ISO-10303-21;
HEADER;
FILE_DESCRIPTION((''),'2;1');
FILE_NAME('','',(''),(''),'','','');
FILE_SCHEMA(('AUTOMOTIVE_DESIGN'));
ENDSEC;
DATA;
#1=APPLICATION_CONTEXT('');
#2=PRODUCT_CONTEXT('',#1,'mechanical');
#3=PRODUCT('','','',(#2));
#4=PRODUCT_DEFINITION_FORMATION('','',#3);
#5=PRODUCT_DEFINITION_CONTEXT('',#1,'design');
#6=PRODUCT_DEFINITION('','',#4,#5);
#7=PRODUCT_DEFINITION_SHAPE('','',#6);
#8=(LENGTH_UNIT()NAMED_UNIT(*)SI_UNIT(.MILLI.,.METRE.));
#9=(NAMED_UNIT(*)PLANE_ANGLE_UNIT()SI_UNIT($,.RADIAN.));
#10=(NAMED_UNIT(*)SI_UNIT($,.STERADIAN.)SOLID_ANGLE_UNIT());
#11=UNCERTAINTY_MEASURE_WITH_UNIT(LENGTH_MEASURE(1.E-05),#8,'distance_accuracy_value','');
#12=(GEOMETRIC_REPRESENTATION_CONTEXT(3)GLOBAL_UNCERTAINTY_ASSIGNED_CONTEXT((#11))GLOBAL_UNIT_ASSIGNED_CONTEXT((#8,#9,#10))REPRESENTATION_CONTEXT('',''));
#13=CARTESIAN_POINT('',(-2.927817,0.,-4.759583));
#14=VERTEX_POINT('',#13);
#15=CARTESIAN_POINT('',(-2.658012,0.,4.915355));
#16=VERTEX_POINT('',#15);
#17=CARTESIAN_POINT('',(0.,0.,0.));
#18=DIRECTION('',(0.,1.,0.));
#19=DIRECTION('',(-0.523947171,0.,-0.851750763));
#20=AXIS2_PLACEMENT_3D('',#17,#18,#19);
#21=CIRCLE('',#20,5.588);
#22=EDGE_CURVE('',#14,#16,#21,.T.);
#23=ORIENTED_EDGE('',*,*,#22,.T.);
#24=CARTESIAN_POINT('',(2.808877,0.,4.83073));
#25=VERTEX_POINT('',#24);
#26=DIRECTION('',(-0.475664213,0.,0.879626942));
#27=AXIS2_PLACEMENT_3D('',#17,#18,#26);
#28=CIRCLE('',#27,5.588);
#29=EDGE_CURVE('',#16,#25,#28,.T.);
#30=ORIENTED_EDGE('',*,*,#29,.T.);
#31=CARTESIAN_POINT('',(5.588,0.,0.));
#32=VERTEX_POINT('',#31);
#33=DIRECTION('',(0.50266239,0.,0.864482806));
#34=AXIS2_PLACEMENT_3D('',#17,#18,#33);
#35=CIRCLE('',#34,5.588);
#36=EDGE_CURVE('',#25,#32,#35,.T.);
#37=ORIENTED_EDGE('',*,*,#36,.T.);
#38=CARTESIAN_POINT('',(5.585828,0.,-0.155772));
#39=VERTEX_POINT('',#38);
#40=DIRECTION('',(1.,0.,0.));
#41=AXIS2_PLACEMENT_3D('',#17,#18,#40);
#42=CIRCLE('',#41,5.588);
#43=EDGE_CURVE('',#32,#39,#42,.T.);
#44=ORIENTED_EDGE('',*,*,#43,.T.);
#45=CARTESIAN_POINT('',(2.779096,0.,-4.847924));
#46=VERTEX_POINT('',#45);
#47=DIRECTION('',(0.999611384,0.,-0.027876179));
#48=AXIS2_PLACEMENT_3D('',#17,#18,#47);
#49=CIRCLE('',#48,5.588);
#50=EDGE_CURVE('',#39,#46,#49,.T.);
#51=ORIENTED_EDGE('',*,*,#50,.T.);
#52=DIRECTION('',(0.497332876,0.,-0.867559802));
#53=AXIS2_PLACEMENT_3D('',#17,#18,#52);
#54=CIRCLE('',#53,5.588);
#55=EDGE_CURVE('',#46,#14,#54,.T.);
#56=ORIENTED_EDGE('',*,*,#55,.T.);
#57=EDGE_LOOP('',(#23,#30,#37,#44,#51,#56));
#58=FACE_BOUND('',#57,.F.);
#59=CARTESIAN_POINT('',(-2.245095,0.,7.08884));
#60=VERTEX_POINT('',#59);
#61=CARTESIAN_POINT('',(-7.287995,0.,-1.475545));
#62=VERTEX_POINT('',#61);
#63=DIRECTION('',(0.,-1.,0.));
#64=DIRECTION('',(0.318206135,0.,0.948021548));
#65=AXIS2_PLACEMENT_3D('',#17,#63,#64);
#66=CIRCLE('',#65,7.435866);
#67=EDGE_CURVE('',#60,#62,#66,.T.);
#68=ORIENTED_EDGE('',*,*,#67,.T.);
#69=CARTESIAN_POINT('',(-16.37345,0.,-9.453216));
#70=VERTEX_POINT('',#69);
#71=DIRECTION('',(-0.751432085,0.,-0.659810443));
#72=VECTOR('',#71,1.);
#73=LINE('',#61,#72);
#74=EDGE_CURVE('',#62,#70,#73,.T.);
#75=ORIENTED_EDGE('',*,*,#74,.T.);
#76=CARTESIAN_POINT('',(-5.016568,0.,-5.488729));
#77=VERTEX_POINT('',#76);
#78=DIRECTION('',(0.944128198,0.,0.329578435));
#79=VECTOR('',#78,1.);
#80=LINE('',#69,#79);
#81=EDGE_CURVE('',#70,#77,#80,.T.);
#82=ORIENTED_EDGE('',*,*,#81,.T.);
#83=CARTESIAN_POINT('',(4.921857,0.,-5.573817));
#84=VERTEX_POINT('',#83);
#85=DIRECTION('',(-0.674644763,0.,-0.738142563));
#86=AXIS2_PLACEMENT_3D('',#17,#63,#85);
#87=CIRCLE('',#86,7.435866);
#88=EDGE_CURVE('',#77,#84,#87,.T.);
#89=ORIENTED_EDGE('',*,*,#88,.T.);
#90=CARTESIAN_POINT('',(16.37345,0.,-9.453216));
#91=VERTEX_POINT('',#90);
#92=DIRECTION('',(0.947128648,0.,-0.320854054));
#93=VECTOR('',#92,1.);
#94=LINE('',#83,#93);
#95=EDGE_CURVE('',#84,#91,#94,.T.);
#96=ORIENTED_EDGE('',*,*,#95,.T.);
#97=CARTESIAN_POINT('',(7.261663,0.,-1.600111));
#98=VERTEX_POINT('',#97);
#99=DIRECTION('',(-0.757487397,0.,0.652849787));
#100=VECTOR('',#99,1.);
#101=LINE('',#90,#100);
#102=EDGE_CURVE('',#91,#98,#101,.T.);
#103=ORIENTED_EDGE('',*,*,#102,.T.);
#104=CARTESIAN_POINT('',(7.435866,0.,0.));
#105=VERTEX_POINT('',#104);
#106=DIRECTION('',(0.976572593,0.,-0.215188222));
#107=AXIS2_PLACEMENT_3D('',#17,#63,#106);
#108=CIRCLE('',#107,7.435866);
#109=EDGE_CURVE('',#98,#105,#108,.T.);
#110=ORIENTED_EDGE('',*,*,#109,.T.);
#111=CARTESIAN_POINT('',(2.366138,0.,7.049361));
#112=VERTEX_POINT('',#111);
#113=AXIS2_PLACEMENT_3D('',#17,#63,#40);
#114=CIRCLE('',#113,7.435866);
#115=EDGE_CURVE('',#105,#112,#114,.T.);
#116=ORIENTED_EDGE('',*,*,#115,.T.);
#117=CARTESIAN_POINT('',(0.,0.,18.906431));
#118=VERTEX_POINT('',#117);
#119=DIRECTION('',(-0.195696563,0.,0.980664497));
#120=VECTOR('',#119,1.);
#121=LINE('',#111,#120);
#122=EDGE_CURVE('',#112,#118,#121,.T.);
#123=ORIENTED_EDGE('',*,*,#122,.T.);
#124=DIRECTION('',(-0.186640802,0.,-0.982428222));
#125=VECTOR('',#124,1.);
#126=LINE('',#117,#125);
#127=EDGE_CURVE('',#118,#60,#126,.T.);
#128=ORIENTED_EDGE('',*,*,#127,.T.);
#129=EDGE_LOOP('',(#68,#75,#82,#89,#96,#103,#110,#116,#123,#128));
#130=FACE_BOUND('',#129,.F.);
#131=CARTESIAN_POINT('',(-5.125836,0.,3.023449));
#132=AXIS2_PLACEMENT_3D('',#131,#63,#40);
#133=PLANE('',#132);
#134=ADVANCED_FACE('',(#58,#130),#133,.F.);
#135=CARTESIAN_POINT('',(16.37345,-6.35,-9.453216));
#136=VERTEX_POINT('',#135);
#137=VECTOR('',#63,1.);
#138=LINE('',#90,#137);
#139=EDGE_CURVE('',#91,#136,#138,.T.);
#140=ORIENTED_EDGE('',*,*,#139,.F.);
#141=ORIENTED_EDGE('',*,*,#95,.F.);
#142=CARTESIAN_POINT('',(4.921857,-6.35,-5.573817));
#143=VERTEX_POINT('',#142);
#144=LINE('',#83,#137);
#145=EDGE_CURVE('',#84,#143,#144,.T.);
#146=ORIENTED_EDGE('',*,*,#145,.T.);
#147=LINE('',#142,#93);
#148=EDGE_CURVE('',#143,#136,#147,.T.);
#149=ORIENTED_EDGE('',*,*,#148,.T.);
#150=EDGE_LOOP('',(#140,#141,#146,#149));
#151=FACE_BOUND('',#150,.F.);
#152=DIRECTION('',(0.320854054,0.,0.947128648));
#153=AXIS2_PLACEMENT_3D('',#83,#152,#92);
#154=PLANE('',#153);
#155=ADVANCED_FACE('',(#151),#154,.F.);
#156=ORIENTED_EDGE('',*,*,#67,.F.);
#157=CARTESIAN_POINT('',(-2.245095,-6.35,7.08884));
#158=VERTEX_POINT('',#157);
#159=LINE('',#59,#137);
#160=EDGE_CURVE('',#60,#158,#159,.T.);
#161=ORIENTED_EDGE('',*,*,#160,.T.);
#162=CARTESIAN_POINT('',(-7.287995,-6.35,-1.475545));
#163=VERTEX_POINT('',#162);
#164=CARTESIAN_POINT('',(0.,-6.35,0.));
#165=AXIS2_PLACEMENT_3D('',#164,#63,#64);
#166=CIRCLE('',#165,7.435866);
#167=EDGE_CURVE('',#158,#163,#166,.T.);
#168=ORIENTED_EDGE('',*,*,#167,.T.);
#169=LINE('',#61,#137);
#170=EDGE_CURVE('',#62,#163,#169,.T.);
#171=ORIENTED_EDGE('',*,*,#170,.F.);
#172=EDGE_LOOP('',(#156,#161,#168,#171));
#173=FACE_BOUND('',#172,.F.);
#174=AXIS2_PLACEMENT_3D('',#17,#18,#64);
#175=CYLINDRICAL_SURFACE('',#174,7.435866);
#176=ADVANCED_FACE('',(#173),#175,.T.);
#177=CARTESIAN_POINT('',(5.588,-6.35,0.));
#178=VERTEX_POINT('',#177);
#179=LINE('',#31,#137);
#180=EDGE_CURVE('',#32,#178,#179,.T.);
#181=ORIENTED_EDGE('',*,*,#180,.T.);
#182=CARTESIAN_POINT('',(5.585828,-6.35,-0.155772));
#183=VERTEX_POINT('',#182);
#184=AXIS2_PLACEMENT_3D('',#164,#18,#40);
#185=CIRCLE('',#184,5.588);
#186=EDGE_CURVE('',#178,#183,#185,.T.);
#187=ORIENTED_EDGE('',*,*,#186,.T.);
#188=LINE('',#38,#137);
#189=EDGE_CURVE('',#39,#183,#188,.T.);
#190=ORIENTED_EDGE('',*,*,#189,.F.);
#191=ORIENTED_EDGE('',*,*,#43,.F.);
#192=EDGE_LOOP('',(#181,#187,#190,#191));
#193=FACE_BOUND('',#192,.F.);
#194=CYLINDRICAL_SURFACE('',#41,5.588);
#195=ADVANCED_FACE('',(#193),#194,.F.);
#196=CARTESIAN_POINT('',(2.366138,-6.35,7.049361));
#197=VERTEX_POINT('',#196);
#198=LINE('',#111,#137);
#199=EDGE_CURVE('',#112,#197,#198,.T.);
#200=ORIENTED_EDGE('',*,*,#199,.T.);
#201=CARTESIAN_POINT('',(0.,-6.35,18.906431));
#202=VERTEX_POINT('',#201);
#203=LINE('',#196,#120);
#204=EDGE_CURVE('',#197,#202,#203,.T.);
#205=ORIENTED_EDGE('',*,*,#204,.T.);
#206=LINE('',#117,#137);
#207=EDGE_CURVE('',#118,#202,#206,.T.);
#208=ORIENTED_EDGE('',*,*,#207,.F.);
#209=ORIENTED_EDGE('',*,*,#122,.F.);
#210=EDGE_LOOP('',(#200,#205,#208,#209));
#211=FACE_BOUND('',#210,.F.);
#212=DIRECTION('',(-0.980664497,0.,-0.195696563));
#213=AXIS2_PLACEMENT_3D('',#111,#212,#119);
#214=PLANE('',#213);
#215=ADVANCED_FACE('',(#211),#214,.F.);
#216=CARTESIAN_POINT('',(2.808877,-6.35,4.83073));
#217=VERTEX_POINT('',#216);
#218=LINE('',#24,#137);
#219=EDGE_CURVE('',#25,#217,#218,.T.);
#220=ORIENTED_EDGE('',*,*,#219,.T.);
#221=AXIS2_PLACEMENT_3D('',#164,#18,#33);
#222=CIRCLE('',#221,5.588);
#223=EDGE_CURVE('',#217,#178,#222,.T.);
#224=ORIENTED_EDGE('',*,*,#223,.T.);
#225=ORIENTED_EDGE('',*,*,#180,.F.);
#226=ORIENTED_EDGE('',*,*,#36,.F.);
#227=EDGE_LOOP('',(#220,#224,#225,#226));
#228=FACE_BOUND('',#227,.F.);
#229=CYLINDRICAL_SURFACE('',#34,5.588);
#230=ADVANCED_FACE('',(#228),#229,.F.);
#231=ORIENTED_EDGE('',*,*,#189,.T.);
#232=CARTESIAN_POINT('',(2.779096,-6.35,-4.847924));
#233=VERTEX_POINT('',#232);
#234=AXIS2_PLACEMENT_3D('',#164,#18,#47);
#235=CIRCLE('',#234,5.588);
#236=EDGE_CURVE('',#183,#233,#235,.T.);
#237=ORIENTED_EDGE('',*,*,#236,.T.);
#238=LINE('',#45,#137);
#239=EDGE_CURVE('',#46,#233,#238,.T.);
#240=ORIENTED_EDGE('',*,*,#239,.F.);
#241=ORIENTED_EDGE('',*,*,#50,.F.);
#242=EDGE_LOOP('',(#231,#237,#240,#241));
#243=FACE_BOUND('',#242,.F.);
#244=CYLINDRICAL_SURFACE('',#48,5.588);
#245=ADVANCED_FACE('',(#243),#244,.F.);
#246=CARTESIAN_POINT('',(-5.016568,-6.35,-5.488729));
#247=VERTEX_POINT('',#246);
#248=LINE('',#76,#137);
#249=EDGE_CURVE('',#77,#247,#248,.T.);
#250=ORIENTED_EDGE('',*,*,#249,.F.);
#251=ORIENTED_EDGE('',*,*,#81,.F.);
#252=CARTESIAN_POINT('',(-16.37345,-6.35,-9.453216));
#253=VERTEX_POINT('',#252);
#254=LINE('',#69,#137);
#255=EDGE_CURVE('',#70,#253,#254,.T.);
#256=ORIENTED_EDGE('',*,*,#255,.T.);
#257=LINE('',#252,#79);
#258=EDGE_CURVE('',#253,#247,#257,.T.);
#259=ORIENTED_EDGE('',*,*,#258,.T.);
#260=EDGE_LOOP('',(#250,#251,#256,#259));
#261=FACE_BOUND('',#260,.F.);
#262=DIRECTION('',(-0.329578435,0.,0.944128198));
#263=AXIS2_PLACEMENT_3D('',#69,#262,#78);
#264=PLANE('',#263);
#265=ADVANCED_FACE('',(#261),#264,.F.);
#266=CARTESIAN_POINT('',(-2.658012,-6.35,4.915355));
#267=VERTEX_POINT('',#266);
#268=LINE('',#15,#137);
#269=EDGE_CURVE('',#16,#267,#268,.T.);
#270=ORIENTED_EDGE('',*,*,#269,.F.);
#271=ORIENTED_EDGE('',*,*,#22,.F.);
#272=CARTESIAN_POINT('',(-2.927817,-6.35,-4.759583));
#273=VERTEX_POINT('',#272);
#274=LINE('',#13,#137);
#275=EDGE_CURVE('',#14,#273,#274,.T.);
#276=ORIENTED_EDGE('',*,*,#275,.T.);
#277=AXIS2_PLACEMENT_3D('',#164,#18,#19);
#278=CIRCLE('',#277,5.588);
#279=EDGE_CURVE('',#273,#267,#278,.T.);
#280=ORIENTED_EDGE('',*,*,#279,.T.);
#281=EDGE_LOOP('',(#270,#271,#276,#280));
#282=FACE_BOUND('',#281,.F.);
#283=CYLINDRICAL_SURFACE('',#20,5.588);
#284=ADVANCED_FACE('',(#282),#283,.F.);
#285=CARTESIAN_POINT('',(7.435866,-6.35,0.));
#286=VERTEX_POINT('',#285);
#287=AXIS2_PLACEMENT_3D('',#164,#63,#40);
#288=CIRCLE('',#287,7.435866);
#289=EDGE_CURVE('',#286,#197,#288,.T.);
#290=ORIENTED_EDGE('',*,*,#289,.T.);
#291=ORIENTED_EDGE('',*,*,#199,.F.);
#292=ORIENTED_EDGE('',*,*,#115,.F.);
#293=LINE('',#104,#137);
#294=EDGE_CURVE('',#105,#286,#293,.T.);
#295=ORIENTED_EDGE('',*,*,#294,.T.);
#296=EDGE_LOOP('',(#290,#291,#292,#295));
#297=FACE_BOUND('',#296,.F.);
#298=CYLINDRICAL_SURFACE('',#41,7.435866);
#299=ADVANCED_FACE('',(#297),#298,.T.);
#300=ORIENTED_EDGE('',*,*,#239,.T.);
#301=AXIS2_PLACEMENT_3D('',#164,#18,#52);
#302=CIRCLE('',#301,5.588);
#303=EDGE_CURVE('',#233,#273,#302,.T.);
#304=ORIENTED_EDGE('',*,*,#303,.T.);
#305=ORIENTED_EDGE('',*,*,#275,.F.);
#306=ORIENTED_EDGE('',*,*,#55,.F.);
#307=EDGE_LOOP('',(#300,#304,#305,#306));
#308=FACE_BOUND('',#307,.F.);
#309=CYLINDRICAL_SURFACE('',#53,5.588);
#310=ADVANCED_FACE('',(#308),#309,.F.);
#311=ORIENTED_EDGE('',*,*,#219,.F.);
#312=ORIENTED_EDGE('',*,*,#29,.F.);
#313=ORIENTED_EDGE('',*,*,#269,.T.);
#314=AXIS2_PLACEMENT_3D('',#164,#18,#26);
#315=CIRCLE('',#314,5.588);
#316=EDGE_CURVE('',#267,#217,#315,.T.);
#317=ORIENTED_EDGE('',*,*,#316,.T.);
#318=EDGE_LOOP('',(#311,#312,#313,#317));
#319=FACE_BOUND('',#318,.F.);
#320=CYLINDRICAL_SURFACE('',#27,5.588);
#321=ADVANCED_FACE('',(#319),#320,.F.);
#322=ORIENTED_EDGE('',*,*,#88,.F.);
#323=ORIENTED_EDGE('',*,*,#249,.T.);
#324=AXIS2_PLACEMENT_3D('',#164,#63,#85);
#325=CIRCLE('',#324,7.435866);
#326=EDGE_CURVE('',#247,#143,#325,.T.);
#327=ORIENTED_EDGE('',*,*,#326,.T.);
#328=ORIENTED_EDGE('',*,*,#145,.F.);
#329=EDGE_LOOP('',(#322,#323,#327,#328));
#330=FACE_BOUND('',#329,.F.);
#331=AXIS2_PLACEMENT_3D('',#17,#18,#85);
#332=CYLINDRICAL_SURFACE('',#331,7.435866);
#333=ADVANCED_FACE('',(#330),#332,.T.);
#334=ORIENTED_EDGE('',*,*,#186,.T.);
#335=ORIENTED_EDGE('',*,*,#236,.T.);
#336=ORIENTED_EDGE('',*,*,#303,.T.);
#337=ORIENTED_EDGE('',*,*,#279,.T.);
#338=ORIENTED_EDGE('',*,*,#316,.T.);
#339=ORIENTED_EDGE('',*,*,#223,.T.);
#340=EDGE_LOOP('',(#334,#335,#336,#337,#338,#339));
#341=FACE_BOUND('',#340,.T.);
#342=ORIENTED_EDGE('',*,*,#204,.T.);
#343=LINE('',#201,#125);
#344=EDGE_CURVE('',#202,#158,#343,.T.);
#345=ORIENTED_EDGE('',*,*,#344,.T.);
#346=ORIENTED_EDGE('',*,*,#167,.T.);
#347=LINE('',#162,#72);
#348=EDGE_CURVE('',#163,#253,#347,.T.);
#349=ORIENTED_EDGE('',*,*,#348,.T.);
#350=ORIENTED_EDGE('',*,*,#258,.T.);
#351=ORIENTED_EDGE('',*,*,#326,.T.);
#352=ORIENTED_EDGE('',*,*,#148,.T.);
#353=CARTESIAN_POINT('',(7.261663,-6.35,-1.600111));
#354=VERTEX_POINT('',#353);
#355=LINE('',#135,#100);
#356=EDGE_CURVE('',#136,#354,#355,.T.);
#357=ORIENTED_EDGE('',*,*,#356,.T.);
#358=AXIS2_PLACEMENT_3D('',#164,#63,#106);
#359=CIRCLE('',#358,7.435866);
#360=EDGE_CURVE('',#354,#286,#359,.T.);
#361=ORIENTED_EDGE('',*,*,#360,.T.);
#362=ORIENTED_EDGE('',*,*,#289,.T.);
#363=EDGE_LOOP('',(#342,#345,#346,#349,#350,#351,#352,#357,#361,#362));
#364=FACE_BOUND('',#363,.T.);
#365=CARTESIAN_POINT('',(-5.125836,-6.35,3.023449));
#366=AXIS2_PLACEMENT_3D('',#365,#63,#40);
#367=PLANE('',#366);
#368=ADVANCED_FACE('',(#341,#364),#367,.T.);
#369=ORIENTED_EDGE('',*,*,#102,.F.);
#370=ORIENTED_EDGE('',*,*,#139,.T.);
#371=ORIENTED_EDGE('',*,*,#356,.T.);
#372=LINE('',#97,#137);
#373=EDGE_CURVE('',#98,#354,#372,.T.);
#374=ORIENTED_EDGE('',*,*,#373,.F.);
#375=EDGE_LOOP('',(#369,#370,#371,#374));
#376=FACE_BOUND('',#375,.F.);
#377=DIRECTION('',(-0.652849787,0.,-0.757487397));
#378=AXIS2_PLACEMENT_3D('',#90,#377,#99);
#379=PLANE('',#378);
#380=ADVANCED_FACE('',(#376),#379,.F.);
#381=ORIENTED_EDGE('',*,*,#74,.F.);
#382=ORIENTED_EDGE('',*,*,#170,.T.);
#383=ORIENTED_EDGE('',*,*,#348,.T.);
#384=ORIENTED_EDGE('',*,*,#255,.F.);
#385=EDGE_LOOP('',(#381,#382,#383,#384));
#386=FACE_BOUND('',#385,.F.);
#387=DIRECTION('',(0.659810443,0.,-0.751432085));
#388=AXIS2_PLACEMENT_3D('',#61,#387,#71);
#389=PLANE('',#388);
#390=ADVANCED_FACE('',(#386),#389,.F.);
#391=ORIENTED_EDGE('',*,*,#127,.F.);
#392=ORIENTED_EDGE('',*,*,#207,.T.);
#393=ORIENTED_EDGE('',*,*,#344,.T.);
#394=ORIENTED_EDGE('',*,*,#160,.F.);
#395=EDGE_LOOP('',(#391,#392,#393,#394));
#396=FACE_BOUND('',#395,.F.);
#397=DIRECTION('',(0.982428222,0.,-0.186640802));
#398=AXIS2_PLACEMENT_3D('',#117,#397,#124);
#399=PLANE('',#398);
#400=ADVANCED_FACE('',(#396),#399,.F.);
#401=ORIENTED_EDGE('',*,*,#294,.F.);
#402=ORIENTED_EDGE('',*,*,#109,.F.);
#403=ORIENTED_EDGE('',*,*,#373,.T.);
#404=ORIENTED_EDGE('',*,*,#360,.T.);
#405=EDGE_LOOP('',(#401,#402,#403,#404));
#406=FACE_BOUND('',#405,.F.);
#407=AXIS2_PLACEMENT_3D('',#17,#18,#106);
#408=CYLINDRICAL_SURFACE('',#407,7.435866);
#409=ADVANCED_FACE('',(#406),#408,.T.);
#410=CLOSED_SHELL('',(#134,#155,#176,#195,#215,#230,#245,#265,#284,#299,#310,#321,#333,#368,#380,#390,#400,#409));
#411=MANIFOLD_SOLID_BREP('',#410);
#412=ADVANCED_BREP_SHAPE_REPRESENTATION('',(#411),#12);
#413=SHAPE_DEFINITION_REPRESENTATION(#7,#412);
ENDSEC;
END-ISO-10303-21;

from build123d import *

# Parameters (mm, degrees)
F1_DEPTH = 6.35


with BuildPart() as f1:
    # F0 (on Front) → F1 (new body)
    with BuildSketch(Plane.XZ):
        with BuildLine():
            ThreePointArc((-5.5879735466, 0.0171942529), (-4.7955253497, 2.8685676949), (-2.6580116206, 4.9153553508))
            Line((-2.6580116206, 4.9153553508), (-2.2450949747, 7.0888402589))
            ThreePointArc((-2.2450949747, 7.0888402589), (-6.4075834438, 3.7729275201), (-7.2879952633, -1.4755448838))
            Line((-7.2879952633, -1.4755448838), (-5.5879735466, 0.0171942529))
        make_face()
        with BuildLine():
            ThreePointArc((-2.6580116206, 4.9153553508), (0.0864898214, 5.5873306248), (2.8088774331, 4.8307299206))
            Line((2.8088774331, 4.8307299206), (2.3661382778, 7.0493614826))
            ThreePointArc((2.3661382778, 7.0493614826), (0.0636593572, 7.4355937993), (-2.2450949747, 7.0888402589))
            Line((-2.2450949747, 7.0888402589), (-2.6580116206, 4.9153553508))
        make_face()
        with BuildLine():
            Line((2.3661382778, 7.0493614826), (2.8088774331, 4.8307299206))
            ThreePointArc((2.8088774331, 4.8307299206), (4.8436427973, 2.7865513546), (5.588, 0))
            ThreePointArc((5.588, 0), (5.5874570768, -0.0778936122), (5.5858284127, -0.1557720884))
            Line((5.5858284127, -0.1557720884), (7.2616632349, -1.6001108475))
            ThreePointArc((7.2616632349, -1.6001108475), (7.3921872476, -0.8047828019), (7.435866302, 0))
            ThreePointArc((7.435866302, 0), (6.0368201707, 4.3415331264), (2.3661382778, 7.0493614826))
        make_face()
        with BuildLine():
            ThreePointArc((-2.2450949747, 7.0888402589), (0.0636593572, 7.4355937993), (2.3661382778, 7.0493614826))
            Line((2.3661382778, 7.0493614826), (0, 18.9064312726))
            Line((0, 18.9064312726), (-2.2450949747, 7.0888402589))
        make_face()
        with BuildLine():
            Line((16.373449777, -9.4532156363), (7.2616632349, -1.6001108475))
            ThreePointArc((7.2616632349, -1.6001108475), (6.4075834438, -3.7729275201), (4.9218569854, -5.5738165987))
            Line((4.9218569854, -5.5738165987), (16.373449777, -9.4532156363))
        make_face()
        with BuildLine():
            Line((7.2616632349, -1.6001108475), (5.5858284127, -0.1557720884))
            ThreePointArc((5.5858284127, -0.1557720884), (4.7955253497, -2.8685676949), (2.7790961135, -4.8479241735))
            Line((2.7790961135, -4.8479241735), (4.9218569854, -5.5738165987))
            ThreePointArc((4.9218569854, -5.5738165987), (6.4075834438, -3.7729275201), (7.2616632349, -1.6001108475))
        make_face()
        with BuildLine():
            ThreePointArc((2.7790961135, -4.8479241735), (-0.0864898214, -5.5873306248), (-2.9278167921, -4.7595832624))
            Line((-2.9278167921, -4.7595832624), (-5.0165682602, -5.4887294114))
            ThreePointArc((-5.0165682602, -5.4887294114), (-0.0636593572, -7.4355937993), (4.9218569854, -5.5738165987))
            Line((4.9218569854, -5.5738165987), (2.7790961135, -4.8479241735))
        make_face()
        with BuildLine():
            Line((-16.373449777, -9.4532156363), (-5.0165682602, -5.4887294114))
            ThreePointArc((-5.0165682602, -5.4887294114), (-6.471242801, -3.6626662791), (-7.2879952633, -1.4755448838))
            Line((-7.2879952633, -1.4755448838), (-16.373449777, -9.4532156363))
        make_face()
        with BuildLine():
            Line((-5.0165682602, -5.4887294114), (-2.9278167921, -4.7595832624))
            ThreePointArc((-2.9278167921, -4.7595832624), (-4.8820151711, -2.7187629299), (-5.5879735466, 0.0171942529))
            Line((-5.5879735466, 0.0171942529), (-7.2879952633, -1.4755448838))
            ThreePointArc((-7.2879952633, -1.4755448838), (-6.471242801, -3.6626662791), (-5.0165682602, -5.4887294114))
        make_face()
    extrude(amount=F1_DEPTH)


solid = f1.part
